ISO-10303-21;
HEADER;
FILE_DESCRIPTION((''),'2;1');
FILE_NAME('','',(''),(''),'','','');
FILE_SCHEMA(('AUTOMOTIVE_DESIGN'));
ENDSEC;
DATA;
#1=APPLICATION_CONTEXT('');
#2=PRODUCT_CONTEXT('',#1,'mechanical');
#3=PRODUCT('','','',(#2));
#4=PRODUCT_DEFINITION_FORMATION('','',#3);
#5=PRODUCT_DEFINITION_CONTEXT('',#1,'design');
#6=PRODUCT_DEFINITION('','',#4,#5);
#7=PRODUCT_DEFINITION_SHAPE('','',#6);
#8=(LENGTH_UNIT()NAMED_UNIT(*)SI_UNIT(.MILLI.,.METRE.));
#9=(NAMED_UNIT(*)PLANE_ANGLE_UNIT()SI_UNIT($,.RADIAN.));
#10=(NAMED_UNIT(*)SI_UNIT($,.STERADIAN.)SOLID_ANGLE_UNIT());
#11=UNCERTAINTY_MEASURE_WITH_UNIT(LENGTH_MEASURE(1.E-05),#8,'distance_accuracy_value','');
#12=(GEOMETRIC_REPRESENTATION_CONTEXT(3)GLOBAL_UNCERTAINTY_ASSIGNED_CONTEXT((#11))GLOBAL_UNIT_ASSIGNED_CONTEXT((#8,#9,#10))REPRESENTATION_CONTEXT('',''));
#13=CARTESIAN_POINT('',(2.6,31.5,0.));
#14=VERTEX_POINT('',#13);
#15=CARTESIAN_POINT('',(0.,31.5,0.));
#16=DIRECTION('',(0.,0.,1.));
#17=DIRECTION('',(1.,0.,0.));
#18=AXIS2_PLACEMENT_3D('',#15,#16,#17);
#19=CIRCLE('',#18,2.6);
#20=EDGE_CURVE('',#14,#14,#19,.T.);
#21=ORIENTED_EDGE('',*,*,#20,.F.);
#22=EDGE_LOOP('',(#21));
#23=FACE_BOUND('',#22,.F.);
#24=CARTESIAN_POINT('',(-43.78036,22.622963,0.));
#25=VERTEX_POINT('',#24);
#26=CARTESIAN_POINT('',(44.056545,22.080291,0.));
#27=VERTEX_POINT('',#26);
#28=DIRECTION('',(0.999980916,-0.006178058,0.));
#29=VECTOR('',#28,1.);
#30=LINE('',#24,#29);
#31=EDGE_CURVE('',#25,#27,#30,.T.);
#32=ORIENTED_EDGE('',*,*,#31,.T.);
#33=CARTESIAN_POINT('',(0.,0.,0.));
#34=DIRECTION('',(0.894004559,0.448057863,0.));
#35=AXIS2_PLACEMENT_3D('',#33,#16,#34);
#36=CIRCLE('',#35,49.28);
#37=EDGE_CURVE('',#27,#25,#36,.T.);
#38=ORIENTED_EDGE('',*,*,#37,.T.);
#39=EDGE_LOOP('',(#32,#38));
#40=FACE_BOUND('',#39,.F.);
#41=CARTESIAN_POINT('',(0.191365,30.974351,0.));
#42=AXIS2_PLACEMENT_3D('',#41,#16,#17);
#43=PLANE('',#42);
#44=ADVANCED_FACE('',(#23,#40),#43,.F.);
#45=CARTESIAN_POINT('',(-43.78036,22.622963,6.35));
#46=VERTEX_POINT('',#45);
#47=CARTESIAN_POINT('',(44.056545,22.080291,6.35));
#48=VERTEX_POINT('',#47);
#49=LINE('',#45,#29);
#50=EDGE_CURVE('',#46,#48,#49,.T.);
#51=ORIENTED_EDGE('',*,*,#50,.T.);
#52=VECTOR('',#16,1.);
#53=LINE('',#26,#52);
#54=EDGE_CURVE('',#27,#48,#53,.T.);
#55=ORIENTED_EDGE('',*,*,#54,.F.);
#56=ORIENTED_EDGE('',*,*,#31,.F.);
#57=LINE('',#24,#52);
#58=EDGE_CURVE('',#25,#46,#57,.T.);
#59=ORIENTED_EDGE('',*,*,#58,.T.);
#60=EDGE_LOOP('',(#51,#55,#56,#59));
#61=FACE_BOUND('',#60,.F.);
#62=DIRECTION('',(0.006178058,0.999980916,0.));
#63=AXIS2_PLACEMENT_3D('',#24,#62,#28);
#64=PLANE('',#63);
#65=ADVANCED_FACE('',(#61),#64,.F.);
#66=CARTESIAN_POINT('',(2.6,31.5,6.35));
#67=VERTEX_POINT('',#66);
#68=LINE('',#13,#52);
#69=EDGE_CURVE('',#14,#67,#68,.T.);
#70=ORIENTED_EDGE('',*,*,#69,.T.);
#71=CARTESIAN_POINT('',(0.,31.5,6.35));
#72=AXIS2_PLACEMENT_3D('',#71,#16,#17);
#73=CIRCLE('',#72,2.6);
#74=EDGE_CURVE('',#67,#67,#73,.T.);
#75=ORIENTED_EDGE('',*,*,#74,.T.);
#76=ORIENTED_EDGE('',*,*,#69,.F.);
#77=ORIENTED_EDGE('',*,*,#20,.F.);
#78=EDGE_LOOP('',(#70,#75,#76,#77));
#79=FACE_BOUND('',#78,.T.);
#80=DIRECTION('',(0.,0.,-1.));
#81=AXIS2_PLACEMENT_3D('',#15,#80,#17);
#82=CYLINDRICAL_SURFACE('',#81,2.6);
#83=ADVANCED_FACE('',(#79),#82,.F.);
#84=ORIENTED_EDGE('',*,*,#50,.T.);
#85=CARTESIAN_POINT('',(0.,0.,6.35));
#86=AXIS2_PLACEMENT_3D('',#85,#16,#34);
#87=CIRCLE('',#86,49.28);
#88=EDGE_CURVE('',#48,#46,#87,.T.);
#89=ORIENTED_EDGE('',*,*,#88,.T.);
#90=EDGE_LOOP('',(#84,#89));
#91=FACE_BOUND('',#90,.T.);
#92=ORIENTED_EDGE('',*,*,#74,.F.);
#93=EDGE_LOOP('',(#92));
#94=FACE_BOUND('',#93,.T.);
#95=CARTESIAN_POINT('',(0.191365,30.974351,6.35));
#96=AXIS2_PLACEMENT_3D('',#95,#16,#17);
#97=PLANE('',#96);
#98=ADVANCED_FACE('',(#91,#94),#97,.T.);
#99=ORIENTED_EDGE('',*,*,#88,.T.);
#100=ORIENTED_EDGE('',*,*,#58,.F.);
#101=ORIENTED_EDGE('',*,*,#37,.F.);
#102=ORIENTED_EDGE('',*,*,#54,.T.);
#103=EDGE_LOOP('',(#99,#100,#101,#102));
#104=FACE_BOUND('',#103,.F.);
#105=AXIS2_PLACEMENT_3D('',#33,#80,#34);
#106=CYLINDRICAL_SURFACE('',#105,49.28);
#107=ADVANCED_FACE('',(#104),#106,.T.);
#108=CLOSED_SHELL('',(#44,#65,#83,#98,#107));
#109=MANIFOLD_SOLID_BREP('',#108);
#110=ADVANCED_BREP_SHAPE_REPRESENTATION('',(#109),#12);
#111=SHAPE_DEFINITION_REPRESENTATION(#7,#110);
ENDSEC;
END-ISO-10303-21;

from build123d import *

# Parameters (mm, degrees)
F0_R     = 2.6
F1_DEPTH = 6.35


# Not quite as in the source:
# - a length typed as a fraction of an inch, garbled in the dataset ("3 / 203.2 mm" for 3/8 in), is restored


with BuildPart() as f1:
    # F0 (on Top) → F1 (new body)
    with BuildSketch(Plane.XY):
        with BuildLine():
            Line((-43.7803601081, 22.6229633074), (44.056544665, 22.0802914876))
            ThreePointArc((44.056544665, 22.0802914876), (0.304454682, 49.2790595217), (-43.7803601081, 22.6229633074))
        make_face()
        with Locations((0, 31.5)):
            Circle(F0_R, mode=Mode.SUBTRACT)
    extrude(amount=F1_DEPTH)


solid = f1.part
